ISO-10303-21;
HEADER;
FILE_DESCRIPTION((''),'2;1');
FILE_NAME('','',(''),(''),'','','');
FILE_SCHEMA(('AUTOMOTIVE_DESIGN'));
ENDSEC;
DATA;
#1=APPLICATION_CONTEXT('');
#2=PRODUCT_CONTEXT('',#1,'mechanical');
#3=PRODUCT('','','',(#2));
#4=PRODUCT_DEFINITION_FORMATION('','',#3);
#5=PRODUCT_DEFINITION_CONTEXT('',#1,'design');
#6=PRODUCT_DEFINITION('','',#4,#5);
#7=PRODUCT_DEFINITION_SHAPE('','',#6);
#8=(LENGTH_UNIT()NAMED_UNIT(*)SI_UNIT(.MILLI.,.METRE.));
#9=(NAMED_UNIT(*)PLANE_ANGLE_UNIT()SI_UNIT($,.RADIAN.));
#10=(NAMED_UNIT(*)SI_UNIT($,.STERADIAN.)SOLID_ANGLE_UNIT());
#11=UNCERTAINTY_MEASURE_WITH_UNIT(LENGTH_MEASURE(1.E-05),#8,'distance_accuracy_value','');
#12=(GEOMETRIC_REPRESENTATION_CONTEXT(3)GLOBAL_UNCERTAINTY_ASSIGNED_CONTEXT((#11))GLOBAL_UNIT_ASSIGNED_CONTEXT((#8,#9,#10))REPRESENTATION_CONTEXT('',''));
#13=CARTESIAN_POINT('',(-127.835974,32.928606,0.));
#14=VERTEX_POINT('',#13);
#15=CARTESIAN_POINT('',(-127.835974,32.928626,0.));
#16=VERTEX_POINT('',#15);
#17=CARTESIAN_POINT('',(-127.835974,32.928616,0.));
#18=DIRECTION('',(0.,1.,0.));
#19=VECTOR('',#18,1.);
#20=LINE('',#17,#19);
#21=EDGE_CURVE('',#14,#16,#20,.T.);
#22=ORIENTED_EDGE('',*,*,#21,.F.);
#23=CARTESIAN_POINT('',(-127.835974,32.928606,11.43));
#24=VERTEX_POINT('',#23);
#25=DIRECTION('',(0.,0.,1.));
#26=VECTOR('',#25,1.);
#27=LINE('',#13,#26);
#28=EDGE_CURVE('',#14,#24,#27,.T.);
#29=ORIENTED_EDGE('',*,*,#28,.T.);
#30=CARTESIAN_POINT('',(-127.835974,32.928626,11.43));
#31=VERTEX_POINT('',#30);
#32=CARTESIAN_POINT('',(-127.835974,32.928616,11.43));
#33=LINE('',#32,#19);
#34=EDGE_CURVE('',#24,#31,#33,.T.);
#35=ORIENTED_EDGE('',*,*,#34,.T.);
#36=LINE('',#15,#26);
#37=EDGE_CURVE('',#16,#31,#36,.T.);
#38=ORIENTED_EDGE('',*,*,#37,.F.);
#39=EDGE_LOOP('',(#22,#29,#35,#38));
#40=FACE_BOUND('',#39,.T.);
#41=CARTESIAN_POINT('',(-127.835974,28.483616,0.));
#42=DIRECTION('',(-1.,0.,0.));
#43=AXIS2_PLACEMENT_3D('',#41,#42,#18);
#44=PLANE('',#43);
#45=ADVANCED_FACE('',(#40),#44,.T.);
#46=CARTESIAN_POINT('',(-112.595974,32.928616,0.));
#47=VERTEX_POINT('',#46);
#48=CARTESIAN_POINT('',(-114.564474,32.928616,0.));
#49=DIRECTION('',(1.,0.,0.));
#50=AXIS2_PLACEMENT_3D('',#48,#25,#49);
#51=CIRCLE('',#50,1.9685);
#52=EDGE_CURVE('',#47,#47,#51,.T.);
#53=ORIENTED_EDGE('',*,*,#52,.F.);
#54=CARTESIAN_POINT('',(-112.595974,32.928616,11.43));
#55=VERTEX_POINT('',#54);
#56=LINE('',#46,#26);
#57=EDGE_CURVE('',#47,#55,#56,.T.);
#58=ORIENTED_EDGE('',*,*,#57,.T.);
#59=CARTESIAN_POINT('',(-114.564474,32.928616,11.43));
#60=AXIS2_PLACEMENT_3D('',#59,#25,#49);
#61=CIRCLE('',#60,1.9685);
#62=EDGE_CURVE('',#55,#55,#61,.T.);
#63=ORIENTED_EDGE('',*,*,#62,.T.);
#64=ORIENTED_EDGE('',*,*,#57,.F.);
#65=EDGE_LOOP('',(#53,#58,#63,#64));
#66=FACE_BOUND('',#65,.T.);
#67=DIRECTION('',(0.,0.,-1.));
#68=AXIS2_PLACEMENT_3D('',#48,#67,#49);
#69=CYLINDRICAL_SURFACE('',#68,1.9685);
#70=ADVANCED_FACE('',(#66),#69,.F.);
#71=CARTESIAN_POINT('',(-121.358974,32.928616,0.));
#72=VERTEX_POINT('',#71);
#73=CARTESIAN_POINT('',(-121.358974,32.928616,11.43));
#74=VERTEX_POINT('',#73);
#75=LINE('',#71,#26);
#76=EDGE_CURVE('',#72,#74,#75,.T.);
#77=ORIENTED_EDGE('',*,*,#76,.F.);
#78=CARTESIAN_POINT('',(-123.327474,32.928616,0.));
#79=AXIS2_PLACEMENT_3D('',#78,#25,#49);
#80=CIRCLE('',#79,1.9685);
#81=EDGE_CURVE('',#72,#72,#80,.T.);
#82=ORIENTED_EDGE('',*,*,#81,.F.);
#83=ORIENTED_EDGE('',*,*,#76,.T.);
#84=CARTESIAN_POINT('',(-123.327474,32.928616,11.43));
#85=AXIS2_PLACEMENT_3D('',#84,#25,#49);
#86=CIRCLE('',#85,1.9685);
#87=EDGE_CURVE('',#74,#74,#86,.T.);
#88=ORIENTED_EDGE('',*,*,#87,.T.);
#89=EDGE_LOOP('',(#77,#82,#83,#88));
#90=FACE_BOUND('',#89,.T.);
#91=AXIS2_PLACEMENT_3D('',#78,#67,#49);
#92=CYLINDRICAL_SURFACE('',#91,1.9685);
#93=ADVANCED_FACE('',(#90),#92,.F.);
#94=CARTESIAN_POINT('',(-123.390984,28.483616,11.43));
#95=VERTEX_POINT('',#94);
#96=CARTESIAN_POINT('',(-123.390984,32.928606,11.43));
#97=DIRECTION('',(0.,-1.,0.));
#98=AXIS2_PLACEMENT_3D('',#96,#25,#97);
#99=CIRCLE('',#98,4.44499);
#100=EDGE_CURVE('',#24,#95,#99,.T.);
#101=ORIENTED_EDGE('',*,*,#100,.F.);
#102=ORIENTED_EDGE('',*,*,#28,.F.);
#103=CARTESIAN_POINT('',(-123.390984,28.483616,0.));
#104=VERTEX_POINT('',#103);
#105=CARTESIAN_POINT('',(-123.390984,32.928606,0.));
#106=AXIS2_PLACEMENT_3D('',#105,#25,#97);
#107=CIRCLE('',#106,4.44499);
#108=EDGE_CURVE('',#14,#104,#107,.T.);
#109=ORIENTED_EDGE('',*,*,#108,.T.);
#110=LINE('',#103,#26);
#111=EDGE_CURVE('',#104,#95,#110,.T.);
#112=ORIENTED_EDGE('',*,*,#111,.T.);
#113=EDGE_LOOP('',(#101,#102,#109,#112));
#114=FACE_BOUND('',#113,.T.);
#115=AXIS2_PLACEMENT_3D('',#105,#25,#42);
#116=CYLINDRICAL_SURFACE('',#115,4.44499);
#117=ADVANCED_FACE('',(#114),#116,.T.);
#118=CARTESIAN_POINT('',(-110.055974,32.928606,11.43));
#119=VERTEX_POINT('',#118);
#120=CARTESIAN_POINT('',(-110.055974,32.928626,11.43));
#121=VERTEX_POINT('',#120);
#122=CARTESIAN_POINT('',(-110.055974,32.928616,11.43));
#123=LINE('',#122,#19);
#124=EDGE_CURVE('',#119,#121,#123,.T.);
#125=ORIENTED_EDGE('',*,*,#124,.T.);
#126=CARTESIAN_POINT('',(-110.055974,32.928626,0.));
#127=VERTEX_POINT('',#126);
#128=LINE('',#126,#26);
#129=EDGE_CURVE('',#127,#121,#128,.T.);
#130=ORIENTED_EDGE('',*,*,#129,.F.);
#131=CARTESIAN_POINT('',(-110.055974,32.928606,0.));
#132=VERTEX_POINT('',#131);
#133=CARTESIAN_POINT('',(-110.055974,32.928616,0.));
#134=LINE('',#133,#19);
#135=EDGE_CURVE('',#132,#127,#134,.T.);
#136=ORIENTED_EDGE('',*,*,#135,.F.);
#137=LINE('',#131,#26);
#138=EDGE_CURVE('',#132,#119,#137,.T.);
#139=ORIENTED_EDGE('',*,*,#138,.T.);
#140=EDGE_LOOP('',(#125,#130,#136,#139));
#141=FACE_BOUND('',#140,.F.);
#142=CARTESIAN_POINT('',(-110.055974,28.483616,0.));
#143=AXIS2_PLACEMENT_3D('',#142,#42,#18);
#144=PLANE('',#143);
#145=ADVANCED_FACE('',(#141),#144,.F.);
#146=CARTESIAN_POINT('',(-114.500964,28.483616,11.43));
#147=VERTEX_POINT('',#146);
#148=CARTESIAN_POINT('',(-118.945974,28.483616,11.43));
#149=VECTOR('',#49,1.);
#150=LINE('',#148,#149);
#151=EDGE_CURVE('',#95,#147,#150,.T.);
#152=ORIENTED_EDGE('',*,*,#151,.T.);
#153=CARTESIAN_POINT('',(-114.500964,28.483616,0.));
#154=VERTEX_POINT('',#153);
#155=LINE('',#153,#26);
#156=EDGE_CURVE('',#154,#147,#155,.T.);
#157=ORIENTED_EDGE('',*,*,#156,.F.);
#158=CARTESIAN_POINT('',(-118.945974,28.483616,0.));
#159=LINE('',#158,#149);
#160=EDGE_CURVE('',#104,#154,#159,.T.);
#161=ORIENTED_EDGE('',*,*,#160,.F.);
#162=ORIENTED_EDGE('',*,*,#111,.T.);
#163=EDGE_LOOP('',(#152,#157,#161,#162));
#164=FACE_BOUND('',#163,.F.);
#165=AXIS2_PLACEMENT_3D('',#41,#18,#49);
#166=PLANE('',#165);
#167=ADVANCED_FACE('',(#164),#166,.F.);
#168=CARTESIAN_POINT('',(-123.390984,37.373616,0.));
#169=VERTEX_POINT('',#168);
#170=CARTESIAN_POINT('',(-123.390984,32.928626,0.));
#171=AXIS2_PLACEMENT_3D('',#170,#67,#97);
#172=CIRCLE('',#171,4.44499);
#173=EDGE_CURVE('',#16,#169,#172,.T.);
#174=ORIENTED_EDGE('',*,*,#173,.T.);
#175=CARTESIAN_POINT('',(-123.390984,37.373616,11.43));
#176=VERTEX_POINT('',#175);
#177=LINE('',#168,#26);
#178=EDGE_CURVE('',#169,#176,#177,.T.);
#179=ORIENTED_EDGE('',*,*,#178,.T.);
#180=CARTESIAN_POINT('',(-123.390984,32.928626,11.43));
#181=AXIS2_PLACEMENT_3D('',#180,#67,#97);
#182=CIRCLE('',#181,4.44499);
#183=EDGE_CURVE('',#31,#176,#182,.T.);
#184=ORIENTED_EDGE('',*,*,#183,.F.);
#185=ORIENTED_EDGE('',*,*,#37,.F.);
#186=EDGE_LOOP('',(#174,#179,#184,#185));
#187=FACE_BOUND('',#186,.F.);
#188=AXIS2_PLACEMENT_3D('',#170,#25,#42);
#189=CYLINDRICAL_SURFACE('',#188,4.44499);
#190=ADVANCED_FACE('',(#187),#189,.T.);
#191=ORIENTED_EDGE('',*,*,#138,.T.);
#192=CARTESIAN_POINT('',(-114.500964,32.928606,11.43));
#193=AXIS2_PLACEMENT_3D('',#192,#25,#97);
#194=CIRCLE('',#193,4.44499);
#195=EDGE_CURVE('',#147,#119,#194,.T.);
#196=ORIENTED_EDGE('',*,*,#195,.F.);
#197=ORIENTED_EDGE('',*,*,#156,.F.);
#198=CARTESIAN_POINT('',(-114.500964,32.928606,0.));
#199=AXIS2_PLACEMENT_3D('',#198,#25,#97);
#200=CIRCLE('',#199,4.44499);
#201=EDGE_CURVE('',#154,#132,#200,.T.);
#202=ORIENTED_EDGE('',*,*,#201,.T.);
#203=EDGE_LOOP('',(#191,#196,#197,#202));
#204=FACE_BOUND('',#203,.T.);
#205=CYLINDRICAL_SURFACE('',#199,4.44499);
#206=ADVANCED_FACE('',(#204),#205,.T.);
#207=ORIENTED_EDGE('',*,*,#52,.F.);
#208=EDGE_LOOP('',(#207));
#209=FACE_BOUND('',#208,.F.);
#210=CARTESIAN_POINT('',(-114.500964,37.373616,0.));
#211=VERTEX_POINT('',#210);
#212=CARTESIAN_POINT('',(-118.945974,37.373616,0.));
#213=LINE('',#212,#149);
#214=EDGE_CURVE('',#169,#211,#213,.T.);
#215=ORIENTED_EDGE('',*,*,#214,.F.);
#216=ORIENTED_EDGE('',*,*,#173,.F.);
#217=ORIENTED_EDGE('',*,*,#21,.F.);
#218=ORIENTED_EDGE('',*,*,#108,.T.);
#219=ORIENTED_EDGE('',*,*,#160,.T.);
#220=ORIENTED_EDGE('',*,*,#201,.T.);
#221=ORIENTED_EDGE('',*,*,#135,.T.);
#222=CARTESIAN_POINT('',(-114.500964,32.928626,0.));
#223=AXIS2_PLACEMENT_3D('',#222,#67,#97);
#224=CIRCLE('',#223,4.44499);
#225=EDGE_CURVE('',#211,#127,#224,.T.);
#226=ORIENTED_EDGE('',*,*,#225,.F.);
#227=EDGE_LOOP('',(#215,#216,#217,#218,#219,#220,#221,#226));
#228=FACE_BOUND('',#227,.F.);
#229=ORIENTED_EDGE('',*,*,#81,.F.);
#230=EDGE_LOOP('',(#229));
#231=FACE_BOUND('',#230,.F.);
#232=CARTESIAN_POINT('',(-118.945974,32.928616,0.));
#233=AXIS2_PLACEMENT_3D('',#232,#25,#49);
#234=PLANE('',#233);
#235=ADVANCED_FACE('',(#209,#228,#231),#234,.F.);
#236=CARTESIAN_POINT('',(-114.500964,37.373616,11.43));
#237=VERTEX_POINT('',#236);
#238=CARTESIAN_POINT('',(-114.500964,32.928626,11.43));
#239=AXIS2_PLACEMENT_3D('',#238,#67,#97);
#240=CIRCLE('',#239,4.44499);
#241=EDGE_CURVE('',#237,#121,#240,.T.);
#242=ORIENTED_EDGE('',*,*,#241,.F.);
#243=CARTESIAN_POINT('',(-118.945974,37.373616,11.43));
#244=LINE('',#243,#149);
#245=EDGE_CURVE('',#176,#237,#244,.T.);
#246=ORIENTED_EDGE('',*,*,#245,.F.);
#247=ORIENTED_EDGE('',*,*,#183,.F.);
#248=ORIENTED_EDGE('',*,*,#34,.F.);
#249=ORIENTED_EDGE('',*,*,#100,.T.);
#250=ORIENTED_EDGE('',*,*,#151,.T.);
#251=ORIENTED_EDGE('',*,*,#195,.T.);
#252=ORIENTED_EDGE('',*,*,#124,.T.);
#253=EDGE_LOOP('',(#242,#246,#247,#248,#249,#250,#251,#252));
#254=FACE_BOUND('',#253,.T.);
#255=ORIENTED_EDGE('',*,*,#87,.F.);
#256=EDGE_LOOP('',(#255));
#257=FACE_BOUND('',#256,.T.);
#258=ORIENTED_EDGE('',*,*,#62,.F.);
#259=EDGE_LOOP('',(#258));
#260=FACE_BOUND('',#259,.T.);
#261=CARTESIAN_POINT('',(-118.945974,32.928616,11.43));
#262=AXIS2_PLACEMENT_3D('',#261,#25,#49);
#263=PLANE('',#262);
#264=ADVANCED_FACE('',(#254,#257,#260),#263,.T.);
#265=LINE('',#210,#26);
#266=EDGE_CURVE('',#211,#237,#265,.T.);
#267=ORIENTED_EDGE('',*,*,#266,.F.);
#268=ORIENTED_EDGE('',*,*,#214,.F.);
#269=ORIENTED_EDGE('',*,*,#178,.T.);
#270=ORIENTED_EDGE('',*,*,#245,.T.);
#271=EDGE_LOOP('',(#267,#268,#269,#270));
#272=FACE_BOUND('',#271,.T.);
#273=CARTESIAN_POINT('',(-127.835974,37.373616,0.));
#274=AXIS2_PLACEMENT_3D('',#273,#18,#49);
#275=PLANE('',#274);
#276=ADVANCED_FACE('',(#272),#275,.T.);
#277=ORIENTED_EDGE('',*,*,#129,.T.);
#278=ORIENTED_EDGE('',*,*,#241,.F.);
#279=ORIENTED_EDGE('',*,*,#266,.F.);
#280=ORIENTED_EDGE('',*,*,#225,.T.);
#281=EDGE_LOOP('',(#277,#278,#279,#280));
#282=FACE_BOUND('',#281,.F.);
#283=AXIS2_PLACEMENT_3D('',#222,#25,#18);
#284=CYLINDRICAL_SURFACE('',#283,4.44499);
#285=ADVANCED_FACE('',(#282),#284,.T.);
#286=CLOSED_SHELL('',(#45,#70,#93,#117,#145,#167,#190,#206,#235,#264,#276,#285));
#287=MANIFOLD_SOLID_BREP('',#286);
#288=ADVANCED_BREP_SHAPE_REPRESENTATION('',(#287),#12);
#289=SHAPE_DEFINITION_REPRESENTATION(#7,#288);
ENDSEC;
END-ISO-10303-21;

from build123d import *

# Parameters (mm, degrees)
F0_W     = 17.78
F0_H     = 8.89
F0_R     = 1.9685
F1_DEPTH = 11.43
F2_R     = 4.44499


# Not quite as in the source:
# - a fillet or chamfer is up to 0.001 mm smaller than in the source, because OpenCascade refuses the exact size


with BuildPart() as f1:
    # F0 (on Top) → F1 (new body)
    with BuildSketch(Plane.XY):
        with Locations((-118.9459740973, 32.9286159712)):
            Rectangle(F0_W, F0_H)
        with Locations((-123.3274740973, 32.9286159712)):
            Circle(F0_R, mode=Mode.SUBTRACT)
        with Locations((-114.5644740973, 32.9286159712)):
            Circle(F0_R, mode=Mode.SUBTRACT)
    extrude(amount=F1_DEPTH)

    # F2 (radius 4.445 in the source; OpenCascade refuses exactly that, so slightly less here)
    f2_edges = [f1.edges().sort_by_distance(p)[0] for p in [
        (-127.835974, 37.373616, 5.715),
        (-110.055974, 37.373616, 5.715),
        (-110.055974, 28.483616, 5.715),
        (-127.835974, 28.483616, 5.715),
    ]]
    fillet(f2_edges, radius=F2_R)


solid = f1.part
